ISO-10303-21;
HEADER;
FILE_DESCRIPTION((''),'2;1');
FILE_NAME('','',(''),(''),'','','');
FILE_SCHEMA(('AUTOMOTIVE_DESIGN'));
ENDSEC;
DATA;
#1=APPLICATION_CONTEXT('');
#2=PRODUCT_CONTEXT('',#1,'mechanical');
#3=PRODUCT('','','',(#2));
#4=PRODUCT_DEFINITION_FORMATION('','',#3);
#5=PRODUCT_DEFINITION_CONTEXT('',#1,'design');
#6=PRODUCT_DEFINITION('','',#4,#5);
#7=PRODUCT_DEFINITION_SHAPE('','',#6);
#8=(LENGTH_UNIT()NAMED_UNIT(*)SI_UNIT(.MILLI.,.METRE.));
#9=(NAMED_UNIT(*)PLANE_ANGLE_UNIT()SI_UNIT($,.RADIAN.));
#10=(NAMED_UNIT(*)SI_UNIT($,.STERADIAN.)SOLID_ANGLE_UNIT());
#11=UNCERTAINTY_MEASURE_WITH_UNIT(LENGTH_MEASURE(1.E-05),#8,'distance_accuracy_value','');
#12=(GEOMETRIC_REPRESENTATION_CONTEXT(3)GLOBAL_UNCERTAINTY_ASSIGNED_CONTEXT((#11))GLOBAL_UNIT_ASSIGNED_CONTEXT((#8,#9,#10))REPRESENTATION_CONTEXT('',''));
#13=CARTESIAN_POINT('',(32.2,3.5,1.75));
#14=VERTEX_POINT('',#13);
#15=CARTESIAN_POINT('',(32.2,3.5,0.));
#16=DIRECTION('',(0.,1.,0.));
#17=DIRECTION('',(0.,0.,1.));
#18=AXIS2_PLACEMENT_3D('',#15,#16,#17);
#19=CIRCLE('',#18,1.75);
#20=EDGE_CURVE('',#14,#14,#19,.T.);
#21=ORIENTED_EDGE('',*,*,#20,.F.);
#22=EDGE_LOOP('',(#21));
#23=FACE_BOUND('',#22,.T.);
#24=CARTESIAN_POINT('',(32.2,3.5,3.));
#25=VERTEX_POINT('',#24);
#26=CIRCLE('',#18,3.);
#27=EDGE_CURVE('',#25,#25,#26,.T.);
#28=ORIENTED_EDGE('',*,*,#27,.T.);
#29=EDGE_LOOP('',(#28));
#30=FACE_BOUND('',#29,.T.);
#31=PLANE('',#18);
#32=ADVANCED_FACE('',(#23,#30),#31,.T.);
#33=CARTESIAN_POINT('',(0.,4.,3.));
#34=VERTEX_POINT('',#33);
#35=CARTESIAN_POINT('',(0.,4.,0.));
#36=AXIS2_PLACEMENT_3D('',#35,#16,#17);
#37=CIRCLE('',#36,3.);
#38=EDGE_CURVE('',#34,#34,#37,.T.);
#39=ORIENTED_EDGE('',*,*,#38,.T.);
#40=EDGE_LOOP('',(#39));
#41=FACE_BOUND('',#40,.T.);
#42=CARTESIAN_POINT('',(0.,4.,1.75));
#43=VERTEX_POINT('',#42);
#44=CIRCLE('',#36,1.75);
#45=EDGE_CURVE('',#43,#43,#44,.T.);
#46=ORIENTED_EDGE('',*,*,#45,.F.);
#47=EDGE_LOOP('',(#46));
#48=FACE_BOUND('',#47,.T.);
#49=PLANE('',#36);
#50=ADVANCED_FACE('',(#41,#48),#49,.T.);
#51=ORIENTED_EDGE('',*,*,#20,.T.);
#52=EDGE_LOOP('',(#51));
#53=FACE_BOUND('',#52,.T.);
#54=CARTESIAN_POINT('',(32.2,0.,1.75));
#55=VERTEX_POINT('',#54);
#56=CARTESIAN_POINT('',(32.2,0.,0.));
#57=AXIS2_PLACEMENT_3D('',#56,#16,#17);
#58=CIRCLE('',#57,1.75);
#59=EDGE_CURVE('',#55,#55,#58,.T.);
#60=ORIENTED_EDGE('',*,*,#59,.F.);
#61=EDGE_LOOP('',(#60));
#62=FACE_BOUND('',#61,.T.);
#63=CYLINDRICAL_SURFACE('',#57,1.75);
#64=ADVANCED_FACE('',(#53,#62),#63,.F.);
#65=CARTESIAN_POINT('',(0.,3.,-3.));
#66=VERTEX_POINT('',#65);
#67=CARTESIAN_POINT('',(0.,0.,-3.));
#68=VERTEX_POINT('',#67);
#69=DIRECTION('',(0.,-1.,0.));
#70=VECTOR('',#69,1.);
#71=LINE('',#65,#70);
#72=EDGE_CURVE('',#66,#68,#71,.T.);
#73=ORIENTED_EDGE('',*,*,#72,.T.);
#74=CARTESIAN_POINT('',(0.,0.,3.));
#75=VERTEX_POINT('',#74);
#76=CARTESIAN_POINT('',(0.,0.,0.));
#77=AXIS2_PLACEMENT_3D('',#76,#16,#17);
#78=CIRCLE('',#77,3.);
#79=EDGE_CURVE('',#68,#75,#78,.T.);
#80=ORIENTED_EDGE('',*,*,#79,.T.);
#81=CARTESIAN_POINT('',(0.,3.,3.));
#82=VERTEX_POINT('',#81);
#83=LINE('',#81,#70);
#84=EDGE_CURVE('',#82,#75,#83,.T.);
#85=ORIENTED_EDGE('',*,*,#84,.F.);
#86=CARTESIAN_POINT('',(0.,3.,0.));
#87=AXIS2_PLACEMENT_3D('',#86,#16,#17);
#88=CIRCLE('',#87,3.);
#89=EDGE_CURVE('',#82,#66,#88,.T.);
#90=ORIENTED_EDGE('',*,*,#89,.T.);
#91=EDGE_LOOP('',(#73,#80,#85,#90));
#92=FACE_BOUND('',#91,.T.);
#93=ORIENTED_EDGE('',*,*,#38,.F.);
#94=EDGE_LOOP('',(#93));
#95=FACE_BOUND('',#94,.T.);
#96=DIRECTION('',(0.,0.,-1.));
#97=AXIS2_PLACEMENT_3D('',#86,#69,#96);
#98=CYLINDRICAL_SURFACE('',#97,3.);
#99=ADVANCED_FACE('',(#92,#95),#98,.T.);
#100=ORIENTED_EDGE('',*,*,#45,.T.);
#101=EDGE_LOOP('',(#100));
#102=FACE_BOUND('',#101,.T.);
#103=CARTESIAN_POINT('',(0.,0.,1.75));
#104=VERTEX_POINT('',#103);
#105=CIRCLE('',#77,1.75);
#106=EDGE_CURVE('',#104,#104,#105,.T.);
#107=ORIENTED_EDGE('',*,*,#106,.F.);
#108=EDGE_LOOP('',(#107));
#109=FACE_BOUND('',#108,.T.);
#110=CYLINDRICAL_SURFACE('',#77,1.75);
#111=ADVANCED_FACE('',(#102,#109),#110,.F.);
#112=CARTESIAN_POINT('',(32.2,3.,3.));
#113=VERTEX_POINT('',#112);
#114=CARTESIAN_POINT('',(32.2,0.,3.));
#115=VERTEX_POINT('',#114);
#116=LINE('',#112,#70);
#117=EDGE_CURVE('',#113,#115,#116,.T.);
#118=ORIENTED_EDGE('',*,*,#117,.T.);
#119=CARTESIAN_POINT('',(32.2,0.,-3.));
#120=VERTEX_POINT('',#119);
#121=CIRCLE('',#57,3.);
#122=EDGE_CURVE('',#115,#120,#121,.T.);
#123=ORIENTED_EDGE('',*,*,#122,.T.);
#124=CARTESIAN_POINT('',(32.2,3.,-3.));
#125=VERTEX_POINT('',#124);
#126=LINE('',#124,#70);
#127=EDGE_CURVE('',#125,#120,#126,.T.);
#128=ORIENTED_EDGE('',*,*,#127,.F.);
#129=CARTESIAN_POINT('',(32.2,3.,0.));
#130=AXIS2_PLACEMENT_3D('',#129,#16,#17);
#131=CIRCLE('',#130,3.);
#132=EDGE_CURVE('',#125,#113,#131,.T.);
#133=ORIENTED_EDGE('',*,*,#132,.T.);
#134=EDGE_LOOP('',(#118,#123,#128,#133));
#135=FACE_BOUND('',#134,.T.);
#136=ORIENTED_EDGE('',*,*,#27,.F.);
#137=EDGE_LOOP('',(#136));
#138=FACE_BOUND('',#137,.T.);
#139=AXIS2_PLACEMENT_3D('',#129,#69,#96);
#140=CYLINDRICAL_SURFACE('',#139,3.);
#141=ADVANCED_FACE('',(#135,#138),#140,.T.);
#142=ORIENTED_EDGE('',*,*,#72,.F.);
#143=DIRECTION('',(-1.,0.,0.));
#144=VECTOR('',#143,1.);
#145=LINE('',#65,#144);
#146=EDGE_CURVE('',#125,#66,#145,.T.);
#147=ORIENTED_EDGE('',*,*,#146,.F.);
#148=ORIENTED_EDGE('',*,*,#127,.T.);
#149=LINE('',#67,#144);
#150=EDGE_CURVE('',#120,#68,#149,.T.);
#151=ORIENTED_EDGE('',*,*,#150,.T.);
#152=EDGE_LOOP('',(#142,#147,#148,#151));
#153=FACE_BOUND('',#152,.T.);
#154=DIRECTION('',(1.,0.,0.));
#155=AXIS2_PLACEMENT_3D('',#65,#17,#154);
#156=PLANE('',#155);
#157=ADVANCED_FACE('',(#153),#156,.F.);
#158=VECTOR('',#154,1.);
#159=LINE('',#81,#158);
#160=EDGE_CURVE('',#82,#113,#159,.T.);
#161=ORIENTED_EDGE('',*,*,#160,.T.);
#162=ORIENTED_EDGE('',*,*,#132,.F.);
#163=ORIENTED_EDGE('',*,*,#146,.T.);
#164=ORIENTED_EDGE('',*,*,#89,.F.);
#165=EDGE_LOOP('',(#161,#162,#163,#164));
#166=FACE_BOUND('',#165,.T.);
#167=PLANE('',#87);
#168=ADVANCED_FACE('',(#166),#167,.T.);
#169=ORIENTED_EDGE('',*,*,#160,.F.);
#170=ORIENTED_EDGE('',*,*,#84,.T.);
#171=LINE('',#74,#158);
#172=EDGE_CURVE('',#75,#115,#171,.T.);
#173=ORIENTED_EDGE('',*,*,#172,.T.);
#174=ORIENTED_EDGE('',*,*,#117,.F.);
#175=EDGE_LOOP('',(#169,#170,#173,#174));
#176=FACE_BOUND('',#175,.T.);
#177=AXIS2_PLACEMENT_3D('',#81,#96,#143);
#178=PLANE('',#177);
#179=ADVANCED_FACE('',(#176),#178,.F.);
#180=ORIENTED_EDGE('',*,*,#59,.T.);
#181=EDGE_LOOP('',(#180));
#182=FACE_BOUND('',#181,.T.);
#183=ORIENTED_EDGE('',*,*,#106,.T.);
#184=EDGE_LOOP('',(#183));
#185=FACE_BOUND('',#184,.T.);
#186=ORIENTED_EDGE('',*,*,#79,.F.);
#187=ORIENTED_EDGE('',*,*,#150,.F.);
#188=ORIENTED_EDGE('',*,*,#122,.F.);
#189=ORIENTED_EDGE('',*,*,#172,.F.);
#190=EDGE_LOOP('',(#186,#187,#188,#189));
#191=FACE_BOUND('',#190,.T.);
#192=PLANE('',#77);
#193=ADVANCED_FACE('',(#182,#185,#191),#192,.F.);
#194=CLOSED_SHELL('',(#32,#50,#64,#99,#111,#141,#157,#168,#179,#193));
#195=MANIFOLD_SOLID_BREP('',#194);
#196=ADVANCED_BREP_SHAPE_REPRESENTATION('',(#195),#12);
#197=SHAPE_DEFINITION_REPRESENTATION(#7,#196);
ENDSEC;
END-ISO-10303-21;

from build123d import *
from build123d.topology import SkipClean

# Parameters (mm, degrees)
EXTRUDE_1_DEPTH     = 3
SKETCH_2_R          = 3
EXTRUDE_2_DEPTH     = 0.5
SKETCH_3_R          = 3
EXTRUDE_3_DEPTH     = 1
SKETCH_4_R          = 1.75
CUT_EXTRUDE_1_DEPTH = 36.553340209


with BuildPart() as part:
    # Эскиз1 → Бобышка-Вытянуть1 (new body)
    with BuildSketch(Plane(origin=(0, 0, 0), x_dir=(1, 0, 0), z_dir=(0, 1, 0))):
        with BuildLine():
            Line((0, 3), (32.2, 3))
            ThreePointArc((32.2, 3), (35.2, 0), (32.2, -3))
            Line((32.2, -3), (0, -3))
            ThreePointArc((0, -3), (-3, 0), (0, 3))
        make_face()
    extrude(amount=EXTRUDE_1_DEPTH)

    # Эскиз2 → Бобышка-Вытянуть2 (add)
    with SkipClean():  # the faces are left unmerged after this step: merging them gives an invalid solid
        with BuildSketch(Plane(origin=(0, 3, 0), x_dir=(1, 0, 0), z_dir=(0, 1, 0))):
            with Locations((32.2, 0)):
                Circle(SKETCH_2_R)
        extrude(amount=EXTRUDE_2_DEPTH)
    add(part.part.scale(1), mode=Mode.REPLACE)  # the faces are merged on a copy

    # Эскиз3 → Бобышка-Вытянуть3 (add)
    with BuildSketch(Plane(origin=(0, 3, 0), x_dir=(1, 0, 0), z_dir=(0, 1, 0))):
        Circle(SKETCH_3_R)
    extrude(amount=EXTRUDE_3_DEPTH)

    # Эскиз4 → Вырез-Вытянуть1 (cut, through all)
    with BuildSketch(Plane(origin=(0, 4, 0), x_dir=(1, 0, 0), z_dir=(0, 1, 0))):
        Circle(SKETCH_4_R)
        with Locations((32.2, 0)):
            Circle(SKETCH_4_R)
    extrude(amount=-CUT_EXTRUDE_1_DEPTH, mode=Mode.SUBTRACT)


solid = part.part
